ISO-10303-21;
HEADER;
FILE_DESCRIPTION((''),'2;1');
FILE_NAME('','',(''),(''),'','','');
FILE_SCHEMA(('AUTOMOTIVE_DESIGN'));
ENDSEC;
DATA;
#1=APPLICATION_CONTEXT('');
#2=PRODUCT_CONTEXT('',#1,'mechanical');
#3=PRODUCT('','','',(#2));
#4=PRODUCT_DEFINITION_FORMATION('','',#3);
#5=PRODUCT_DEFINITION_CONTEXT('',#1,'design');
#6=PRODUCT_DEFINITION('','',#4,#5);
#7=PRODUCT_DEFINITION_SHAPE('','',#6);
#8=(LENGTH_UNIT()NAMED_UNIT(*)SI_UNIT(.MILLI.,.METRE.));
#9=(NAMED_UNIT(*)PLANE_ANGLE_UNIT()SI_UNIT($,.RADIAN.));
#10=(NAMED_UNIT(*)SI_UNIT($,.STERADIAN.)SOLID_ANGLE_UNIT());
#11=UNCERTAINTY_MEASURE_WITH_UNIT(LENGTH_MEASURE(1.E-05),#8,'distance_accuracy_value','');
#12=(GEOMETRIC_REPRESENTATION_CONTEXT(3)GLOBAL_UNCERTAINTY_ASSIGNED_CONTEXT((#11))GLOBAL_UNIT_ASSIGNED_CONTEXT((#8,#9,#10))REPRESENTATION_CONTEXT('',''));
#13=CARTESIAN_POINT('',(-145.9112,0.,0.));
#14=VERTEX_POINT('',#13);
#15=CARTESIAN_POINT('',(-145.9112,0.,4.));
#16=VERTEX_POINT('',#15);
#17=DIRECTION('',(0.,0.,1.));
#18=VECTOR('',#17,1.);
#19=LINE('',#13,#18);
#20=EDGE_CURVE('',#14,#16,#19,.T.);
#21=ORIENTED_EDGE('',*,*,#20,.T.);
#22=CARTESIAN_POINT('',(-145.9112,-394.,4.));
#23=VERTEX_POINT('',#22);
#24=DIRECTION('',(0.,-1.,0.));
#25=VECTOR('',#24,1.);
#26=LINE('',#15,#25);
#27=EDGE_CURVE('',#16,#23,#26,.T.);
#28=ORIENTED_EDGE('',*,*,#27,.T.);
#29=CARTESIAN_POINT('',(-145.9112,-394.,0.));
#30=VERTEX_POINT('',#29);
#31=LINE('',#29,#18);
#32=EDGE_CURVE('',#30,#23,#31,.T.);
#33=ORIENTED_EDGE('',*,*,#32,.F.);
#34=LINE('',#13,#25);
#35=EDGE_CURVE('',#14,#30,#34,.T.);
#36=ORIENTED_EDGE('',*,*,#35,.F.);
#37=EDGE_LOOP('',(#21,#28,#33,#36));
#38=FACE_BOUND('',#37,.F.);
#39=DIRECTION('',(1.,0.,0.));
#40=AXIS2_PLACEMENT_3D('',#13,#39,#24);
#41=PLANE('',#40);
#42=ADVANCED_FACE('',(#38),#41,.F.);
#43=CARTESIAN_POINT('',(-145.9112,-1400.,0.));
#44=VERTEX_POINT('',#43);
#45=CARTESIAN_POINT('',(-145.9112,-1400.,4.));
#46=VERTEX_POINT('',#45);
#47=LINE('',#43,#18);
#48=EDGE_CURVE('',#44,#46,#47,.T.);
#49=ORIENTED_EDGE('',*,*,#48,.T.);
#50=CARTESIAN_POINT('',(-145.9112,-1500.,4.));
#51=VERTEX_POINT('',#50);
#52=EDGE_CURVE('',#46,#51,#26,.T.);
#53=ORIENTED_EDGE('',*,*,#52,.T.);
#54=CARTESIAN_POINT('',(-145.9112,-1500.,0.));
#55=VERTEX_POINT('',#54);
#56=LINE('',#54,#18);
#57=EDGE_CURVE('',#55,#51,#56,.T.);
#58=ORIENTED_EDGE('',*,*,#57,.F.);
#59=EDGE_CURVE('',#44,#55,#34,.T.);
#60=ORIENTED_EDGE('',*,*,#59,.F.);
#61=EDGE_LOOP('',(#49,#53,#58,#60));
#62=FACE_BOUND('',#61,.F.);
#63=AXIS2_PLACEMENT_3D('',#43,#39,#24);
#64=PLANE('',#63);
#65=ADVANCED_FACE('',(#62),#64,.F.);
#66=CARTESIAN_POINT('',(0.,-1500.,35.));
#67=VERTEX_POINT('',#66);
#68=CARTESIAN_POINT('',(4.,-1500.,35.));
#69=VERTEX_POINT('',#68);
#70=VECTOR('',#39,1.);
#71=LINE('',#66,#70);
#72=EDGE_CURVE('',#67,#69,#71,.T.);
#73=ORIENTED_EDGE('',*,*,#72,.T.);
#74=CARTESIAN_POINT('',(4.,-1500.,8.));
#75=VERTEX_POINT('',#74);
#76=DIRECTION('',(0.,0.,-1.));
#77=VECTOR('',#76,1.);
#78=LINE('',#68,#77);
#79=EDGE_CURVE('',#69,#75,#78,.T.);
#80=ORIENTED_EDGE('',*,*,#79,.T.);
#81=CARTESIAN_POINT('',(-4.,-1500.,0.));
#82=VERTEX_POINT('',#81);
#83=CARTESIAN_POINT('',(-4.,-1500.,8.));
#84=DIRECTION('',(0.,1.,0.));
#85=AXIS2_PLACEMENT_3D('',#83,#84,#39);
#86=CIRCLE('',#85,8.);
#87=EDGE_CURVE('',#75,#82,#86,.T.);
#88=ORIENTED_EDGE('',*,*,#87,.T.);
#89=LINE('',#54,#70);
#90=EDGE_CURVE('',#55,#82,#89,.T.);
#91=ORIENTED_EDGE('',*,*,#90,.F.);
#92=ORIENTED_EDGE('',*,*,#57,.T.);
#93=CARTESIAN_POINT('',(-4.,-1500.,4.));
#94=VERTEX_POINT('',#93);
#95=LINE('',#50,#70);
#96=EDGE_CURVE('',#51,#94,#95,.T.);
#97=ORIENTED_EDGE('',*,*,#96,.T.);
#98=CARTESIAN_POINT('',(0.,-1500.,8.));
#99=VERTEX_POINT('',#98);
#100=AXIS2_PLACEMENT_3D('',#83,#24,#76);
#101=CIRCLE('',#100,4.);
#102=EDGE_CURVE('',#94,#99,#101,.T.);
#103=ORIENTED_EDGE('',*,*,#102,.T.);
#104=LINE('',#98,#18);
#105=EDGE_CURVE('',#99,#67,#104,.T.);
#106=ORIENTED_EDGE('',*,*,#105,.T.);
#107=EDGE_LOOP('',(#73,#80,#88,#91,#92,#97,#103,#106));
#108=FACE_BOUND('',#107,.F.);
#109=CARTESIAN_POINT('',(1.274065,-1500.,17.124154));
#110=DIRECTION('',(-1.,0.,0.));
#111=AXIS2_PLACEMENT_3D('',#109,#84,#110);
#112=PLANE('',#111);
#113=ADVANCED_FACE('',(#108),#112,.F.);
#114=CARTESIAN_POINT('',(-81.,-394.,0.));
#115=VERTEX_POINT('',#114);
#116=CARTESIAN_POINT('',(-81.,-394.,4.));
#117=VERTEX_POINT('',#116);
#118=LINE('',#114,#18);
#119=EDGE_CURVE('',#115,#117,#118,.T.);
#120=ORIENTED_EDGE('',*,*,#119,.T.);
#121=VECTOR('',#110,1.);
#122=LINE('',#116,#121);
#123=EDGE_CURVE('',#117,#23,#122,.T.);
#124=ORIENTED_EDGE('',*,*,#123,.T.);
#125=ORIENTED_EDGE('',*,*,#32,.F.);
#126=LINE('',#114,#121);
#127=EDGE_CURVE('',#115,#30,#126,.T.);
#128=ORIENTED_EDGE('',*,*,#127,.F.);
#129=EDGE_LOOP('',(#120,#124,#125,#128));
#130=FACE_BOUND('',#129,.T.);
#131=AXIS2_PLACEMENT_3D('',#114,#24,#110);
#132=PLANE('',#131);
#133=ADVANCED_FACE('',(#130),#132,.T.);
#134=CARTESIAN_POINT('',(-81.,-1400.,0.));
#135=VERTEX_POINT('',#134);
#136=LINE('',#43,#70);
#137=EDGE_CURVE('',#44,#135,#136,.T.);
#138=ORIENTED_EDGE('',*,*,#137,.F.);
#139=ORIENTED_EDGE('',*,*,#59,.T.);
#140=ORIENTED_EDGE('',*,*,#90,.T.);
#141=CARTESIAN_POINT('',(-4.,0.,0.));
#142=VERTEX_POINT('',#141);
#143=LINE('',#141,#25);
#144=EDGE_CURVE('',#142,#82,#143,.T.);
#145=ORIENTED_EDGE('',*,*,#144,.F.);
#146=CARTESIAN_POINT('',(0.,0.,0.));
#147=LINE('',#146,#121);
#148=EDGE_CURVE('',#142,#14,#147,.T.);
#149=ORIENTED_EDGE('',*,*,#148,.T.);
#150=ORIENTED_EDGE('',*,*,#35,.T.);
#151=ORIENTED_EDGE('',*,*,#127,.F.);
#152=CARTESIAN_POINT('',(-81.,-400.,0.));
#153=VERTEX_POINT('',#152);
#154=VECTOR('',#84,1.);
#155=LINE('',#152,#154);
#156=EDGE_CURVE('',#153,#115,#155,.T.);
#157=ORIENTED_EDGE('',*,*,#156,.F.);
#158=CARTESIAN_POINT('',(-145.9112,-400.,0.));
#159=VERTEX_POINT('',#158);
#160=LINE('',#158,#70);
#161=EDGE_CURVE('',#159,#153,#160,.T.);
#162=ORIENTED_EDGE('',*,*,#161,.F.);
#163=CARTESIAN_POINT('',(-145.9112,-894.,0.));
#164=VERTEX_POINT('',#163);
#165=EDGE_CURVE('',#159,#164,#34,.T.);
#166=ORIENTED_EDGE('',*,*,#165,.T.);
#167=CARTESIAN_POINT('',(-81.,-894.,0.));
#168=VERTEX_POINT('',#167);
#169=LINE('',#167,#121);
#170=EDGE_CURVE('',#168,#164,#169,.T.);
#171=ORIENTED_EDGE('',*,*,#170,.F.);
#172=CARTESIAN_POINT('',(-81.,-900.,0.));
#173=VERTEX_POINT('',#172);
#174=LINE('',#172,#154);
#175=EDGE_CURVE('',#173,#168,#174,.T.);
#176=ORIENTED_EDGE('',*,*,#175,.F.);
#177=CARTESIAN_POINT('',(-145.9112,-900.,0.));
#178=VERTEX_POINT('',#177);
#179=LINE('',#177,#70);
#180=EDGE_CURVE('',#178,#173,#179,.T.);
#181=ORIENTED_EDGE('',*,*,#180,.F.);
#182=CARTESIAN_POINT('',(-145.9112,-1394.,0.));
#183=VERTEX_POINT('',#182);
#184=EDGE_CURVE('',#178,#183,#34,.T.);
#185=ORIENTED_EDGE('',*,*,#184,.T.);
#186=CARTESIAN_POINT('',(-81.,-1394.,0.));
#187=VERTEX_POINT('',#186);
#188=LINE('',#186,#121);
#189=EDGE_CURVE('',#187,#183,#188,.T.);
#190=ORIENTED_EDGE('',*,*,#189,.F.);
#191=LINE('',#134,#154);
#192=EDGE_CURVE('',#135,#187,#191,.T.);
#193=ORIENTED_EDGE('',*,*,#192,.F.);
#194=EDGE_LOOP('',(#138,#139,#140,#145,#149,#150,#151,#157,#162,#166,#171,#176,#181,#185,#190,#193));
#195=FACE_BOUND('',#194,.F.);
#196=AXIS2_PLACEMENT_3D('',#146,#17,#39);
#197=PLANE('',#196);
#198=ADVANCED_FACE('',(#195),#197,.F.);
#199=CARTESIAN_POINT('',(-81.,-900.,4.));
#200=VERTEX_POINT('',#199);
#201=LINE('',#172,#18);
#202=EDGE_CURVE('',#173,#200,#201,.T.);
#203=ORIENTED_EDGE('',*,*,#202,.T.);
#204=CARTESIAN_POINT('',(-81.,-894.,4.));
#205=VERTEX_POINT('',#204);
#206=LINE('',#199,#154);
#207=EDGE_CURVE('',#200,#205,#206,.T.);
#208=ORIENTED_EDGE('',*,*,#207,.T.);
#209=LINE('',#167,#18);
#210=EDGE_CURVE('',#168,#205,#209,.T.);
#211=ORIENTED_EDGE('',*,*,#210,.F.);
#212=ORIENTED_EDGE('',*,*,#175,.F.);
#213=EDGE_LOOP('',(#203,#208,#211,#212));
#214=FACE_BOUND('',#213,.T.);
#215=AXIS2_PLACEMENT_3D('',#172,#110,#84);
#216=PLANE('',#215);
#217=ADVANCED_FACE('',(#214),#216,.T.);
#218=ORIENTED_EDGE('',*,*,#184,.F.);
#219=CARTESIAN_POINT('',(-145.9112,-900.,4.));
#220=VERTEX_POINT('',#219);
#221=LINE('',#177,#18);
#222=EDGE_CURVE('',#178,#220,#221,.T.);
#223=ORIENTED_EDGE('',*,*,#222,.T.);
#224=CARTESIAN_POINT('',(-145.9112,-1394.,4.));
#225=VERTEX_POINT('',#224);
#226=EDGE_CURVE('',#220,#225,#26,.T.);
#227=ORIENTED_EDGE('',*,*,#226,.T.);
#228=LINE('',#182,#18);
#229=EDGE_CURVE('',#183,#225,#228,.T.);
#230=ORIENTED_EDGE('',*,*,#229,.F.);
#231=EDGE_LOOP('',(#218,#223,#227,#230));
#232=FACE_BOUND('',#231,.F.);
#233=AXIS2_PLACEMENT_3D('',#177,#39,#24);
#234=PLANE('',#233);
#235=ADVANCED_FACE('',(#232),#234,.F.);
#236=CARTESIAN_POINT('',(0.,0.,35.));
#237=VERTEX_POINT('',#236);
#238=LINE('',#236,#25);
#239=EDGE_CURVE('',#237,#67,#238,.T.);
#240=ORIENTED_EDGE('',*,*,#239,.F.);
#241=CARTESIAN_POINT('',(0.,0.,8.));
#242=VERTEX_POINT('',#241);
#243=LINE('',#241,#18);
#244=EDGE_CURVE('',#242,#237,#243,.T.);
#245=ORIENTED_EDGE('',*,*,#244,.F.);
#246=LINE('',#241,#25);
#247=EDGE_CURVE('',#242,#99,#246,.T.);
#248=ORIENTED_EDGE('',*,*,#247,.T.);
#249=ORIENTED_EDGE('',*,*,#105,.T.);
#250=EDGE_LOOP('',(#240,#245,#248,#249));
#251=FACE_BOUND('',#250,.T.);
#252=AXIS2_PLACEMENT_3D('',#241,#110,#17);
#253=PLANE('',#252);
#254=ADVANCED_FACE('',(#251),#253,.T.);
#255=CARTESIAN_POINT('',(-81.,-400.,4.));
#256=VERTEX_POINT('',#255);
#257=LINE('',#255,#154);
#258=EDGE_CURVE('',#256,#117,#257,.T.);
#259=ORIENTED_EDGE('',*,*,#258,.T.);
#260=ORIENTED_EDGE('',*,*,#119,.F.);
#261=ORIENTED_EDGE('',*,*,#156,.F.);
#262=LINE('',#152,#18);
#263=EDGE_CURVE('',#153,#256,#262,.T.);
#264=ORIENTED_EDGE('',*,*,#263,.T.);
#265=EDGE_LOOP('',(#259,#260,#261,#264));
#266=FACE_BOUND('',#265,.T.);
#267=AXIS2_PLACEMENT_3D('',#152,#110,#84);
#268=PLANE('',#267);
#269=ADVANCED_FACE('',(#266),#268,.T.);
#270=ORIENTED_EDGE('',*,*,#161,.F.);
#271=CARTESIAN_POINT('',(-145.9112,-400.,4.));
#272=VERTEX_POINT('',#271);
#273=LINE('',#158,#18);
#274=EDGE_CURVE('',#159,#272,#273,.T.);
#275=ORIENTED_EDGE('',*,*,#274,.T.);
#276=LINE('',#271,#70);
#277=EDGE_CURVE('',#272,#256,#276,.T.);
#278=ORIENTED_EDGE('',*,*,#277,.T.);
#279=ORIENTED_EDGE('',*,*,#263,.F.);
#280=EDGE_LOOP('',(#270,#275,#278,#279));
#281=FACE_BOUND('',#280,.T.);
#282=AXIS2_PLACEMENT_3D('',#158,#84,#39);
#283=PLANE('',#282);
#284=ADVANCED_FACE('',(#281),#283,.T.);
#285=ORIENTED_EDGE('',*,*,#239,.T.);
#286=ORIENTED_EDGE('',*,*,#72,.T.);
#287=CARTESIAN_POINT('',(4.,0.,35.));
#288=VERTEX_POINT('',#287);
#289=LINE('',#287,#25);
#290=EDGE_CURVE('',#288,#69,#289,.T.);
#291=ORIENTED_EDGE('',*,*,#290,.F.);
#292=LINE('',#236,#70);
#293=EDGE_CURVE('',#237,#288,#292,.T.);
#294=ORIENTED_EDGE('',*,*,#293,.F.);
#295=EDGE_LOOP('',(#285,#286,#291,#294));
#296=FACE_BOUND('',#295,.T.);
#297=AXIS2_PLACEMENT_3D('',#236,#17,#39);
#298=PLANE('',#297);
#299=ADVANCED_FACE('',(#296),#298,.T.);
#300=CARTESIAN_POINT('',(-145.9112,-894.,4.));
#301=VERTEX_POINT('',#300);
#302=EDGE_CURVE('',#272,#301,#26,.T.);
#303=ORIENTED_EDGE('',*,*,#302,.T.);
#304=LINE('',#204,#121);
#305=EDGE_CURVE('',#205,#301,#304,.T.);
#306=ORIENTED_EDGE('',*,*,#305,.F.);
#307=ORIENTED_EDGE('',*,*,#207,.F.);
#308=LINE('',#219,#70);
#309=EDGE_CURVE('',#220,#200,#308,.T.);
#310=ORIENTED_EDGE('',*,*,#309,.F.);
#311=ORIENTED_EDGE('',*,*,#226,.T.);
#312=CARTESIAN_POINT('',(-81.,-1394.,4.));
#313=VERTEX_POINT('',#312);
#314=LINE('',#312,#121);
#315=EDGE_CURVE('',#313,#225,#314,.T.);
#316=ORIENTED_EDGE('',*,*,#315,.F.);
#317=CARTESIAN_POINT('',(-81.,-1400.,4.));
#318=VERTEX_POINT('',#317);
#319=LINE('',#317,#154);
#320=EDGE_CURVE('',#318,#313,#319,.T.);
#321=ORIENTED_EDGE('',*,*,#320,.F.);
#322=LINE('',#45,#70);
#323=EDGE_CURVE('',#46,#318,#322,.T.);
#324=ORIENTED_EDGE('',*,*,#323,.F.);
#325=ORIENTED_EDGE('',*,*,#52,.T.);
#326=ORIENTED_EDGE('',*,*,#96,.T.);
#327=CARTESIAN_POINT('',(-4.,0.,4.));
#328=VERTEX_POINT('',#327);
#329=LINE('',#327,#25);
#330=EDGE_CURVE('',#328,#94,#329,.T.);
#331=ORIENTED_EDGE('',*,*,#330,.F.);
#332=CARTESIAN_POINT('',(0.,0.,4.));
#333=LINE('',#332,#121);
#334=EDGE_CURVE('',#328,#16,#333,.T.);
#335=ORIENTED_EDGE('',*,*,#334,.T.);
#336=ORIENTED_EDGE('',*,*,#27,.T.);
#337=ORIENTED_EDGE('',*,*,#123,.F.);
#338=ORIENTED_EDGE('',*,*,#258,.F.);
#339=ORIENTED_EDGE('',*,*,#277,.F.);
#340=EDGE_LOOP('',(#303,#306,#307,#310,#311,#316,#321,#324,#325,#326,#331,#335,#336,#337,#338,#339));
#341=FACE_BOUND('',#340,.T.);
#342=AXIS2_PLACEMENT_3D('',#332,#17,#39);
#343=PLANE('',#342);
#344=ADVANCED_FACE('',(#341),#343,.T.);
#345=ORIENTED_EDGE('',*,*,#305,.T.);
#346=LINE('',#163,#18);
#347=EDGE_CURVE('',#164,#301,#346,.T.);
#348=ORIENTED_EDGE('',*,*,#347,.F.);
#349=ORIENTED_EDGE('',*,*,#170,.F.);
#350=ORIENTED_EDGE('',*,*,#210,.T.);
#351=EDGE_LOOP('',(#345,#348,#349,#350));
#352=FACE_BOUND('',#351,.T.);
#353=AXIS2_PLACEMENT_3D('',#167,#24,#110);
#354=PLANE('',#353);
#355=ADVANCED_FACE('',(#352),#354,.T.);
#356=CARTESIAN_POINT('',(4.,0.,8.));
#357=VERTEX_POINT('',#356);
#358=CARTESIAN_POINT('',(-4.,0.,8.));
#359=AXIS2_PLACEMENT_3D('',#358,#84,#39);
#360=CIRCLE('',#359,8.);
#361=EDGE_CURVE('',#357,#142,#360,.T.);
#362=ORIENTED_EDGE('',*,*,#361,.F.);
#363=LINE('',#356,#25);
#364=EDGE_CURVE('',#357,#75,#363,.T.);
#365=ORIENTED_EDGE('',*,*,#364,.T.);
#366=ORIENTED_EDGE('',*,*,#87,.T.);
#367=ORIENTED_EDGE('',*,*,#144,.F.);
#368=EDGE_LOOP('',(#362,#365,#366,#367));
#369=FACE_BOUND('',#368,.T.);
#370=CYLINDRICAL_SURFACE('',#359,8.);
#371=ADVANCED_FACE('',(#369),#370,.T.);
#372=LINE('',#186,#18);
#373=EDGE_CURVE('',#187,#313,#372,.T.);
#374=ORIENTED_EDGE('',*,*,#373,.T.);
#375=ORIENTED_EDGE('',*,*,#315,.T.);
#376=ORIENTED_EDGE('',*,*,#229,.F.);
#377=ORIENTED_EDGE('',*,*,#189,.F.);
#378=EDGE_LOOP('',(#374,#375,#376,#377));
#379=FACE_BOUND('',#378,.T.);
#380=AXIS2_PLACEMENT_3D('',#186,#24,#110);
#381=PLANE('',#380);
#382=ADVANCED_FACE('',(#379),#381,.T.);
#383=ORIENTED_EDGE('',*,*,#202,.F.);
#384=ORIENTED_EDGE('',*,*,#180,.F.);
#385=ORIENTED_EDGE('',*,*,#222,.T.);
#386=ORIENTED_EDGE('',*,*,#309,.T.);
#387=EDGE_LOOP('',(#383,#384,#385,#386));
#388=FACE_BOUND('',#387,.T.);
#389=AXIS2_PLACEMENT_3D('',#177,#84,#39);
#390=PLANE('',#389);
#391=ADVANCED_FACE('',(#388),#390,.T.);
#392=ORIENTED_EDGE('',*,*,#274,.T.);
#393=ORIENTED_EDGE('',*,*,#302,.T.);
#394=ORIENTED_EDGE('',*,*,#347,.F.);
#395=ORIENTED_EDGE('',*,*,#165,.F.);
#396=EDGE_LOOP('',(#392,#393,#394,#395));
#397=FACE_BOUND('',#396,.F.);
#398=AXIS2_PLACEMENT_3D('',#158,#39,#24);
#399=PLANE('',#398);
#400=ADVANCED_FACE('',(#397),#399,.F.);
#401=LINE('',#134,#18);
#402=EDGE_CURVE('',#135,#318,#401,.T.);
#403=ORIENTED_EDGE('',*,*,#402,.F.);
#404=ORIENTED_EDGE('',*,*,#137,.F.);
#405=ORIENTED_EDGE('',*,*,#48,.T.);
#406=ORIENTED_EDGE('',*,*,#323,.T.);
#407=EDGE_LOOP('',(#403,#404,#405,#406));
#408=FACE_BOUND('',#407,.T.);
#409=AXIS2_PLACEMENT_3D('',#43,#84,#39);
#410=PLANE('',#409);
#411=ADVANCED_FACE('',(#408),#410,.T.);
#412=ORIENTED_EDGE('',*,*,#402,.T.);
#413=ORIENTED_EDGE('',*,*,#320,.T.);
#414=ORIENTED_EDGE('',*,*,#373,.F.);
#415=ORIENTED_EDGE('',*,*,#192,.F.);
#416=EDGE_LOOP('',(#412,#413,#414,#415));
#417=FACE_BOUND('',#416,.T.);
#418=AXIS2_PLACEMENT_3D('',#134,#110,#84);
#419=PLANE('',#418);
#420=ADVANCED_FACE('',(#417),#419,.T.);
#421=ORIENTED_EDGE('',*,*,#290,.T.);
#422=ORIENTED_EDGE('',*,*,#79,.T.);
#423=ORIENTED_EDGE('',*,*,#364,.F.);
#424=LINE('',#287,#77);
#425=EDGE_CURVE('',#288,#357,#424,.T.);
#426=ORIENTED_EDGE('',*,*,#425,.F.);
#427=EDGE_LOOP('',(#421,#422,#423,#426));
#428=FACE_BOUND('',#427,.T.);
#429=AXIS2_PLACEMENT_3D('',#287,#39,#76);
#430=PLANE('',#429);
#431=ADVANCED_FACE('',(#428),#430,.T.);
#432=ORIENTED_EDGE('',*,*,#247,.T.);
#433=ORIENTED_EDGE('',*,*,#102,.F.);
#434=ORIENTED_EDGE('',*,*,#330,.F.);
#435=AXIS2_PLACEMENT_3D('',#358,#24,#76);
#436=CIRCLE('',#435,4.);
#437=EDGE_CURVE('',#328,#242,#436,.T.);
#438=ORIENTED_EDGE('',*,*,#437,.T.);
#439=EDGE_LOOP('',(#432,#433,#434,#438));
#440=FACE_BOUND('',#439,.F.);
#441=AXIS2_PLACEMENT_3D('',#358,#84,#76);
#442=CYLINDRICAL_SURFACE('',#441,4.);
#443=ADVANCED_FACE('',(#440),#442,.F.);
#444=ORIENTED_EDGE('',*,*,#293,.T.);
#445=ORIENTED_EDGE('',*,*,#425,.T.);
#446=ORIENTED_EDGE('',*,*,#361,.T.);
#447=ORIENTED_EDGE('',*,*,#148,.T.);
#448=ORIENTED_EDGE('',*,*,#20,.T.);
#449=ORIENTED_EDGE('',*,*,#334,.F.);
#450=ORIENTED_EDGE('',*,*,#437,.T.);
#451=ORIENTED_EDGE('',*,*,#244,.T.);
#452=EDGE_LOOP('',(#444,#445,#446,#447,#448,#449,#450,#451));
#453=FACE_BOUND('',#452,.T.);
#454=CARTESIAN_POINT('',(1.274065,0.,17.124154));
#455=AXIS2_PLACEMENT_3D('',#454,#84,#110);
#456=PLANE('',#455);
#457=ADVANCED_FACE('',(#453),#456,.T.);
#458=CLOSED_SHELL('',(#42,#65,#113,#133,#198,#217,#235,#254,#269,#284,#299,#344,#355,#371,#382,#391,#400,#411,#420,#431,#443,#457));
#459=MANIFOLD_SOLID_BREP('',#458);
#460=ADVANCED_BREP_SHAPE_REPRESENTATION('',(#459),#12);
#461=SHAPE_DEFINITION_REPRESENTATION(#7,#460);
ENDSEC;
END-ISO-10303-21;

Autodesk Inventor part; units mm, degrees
ref_plane "YZ Plane" through (0, 0, 0) normal (1, 0, 0) x (0, 1, 0)
ref_plane "XZ Plane" through (0, 0, 0) normal (0, 1, 0) x (-1, 0, 0)
ref_plane "XY Plane" through (0, 0, 0) normal (0, 0, 1) x (1, 0, 0)
sketch "Sketch1" plane through (0, 0, 0) normal (0, 0, 1) x (1, 0, 0)
  line L0 (0, 0) -> (-145.9112, 0)
  line L1 (-145.9112, 0) -> (-145.9112, -1500)
  line L2 (-145.9112, -1500) -> (0, -1500)
  line L3 (0, -1500) -> (0, 0)
  line L4 (-145.9112, -1400) -> (-81, -1400)
  line L5 (-81, -1400) -> (-81, -1394)
  line L6 (-81, -1394) -> (-145.9112, -1394)
  line L7 (-145.9112, -1394) -> (-145.9112, -1400)
  line L8 (-145.9112, -900) -> (-81, -900)
  line L9 (-81, -900) -> (-81, -894)
  line L10 (-81, -894) -> (-145.9112, -894)
  line L11 (-145.9112, -894) -> (-145.9112, -900)
  line L12 (-145.9112, -400) -> (-81, -400)
  line L13 (-81, -400) -> (-81, -394)
  line L14 (-81, -394) -> (-145.9112, -394)
  line L15 (-145.9112, -394) -> (-145.9112, -400)
  point P0 (-145.9112, -394)
  point P1 (-145.9112, -400)
  point P2 (-145.9112, -894)
  point P3 (-145.9112, -900)
  point P4 (-145.9112, -1394)
  dimension "d0" = 1500
  dimension "d1" = 145.9112
  dimension "d2" = 6
  dimension "d4" = 100
  dimension "d7" = 500
  dimension "d23" = 81
extrude "Plate1" add sketch "Sketch1" along normal blind 4 contours L3 L2 L1 L4 L5 L6 L8 L9 L10 L12 L13 L14 L0
sketch "Sketch2" plane through (4, 0, 0) normal (-1, 0, 0) x (0, -1, 0)
  line L0 (1500, 0) -> (0, 0)
  line L1 (0, 0) -> (0, 35)
  line L2 (0, 35) -> (1500, 35)
  line L3 (1500, 35) -> (1500, 0)
edge flange "Flange1" height 35 angle 90 thickness 4 bend radius 4 thickness toward (-1, 0, 0) relief tear relief width 4 relief depth 2 edges at (0, -750, 4) wall of the first edge with corners at (4, -1500, 0) (4, 0, 0) (4, 0, 35) (4, -1500, 35)
bend "Bend1"
corner "Corner1"
equation "\"d1\" = Stringer2_3_deep"
equation "\"d12\" = Thickness"
equation "\"d13\" = BendReliefWidth"
equation "\"d14\" = BendReliefDepth"
equation "\"d15\" = MinimumRemnant"
equation "\"d16\" = TransitionRadius"
equation "\"d19\" = BendRadius"
equation "\"d20\" = CornerReliefSize"
equation "\"d21\" = GapSize"
equation "\"d22\" = JacobiRadiusSize"
equation "\"BendRadius\" = Thickness"
equation "\"BendReliefWidth\" = Thickness"
equation "\"BendReliefDepth\" = 0.5 * Thickness"
equation "\"CornerReliefSize\" = 4 * Thickness"
equation "\"MinimumRemnant\" = 2 * Thickness"
equation "\"TransitionRadius\" = BendRadius"
equation "\"JacobiRadiusSize\" = BendRadius"
equation "\"GapSize\" = Thickness"
equation "\"Stringer2_3_deep\" = 145.911249"
equation "\"Thickness\" = 4"
properties part number "stringer 1.3_CPY2"
